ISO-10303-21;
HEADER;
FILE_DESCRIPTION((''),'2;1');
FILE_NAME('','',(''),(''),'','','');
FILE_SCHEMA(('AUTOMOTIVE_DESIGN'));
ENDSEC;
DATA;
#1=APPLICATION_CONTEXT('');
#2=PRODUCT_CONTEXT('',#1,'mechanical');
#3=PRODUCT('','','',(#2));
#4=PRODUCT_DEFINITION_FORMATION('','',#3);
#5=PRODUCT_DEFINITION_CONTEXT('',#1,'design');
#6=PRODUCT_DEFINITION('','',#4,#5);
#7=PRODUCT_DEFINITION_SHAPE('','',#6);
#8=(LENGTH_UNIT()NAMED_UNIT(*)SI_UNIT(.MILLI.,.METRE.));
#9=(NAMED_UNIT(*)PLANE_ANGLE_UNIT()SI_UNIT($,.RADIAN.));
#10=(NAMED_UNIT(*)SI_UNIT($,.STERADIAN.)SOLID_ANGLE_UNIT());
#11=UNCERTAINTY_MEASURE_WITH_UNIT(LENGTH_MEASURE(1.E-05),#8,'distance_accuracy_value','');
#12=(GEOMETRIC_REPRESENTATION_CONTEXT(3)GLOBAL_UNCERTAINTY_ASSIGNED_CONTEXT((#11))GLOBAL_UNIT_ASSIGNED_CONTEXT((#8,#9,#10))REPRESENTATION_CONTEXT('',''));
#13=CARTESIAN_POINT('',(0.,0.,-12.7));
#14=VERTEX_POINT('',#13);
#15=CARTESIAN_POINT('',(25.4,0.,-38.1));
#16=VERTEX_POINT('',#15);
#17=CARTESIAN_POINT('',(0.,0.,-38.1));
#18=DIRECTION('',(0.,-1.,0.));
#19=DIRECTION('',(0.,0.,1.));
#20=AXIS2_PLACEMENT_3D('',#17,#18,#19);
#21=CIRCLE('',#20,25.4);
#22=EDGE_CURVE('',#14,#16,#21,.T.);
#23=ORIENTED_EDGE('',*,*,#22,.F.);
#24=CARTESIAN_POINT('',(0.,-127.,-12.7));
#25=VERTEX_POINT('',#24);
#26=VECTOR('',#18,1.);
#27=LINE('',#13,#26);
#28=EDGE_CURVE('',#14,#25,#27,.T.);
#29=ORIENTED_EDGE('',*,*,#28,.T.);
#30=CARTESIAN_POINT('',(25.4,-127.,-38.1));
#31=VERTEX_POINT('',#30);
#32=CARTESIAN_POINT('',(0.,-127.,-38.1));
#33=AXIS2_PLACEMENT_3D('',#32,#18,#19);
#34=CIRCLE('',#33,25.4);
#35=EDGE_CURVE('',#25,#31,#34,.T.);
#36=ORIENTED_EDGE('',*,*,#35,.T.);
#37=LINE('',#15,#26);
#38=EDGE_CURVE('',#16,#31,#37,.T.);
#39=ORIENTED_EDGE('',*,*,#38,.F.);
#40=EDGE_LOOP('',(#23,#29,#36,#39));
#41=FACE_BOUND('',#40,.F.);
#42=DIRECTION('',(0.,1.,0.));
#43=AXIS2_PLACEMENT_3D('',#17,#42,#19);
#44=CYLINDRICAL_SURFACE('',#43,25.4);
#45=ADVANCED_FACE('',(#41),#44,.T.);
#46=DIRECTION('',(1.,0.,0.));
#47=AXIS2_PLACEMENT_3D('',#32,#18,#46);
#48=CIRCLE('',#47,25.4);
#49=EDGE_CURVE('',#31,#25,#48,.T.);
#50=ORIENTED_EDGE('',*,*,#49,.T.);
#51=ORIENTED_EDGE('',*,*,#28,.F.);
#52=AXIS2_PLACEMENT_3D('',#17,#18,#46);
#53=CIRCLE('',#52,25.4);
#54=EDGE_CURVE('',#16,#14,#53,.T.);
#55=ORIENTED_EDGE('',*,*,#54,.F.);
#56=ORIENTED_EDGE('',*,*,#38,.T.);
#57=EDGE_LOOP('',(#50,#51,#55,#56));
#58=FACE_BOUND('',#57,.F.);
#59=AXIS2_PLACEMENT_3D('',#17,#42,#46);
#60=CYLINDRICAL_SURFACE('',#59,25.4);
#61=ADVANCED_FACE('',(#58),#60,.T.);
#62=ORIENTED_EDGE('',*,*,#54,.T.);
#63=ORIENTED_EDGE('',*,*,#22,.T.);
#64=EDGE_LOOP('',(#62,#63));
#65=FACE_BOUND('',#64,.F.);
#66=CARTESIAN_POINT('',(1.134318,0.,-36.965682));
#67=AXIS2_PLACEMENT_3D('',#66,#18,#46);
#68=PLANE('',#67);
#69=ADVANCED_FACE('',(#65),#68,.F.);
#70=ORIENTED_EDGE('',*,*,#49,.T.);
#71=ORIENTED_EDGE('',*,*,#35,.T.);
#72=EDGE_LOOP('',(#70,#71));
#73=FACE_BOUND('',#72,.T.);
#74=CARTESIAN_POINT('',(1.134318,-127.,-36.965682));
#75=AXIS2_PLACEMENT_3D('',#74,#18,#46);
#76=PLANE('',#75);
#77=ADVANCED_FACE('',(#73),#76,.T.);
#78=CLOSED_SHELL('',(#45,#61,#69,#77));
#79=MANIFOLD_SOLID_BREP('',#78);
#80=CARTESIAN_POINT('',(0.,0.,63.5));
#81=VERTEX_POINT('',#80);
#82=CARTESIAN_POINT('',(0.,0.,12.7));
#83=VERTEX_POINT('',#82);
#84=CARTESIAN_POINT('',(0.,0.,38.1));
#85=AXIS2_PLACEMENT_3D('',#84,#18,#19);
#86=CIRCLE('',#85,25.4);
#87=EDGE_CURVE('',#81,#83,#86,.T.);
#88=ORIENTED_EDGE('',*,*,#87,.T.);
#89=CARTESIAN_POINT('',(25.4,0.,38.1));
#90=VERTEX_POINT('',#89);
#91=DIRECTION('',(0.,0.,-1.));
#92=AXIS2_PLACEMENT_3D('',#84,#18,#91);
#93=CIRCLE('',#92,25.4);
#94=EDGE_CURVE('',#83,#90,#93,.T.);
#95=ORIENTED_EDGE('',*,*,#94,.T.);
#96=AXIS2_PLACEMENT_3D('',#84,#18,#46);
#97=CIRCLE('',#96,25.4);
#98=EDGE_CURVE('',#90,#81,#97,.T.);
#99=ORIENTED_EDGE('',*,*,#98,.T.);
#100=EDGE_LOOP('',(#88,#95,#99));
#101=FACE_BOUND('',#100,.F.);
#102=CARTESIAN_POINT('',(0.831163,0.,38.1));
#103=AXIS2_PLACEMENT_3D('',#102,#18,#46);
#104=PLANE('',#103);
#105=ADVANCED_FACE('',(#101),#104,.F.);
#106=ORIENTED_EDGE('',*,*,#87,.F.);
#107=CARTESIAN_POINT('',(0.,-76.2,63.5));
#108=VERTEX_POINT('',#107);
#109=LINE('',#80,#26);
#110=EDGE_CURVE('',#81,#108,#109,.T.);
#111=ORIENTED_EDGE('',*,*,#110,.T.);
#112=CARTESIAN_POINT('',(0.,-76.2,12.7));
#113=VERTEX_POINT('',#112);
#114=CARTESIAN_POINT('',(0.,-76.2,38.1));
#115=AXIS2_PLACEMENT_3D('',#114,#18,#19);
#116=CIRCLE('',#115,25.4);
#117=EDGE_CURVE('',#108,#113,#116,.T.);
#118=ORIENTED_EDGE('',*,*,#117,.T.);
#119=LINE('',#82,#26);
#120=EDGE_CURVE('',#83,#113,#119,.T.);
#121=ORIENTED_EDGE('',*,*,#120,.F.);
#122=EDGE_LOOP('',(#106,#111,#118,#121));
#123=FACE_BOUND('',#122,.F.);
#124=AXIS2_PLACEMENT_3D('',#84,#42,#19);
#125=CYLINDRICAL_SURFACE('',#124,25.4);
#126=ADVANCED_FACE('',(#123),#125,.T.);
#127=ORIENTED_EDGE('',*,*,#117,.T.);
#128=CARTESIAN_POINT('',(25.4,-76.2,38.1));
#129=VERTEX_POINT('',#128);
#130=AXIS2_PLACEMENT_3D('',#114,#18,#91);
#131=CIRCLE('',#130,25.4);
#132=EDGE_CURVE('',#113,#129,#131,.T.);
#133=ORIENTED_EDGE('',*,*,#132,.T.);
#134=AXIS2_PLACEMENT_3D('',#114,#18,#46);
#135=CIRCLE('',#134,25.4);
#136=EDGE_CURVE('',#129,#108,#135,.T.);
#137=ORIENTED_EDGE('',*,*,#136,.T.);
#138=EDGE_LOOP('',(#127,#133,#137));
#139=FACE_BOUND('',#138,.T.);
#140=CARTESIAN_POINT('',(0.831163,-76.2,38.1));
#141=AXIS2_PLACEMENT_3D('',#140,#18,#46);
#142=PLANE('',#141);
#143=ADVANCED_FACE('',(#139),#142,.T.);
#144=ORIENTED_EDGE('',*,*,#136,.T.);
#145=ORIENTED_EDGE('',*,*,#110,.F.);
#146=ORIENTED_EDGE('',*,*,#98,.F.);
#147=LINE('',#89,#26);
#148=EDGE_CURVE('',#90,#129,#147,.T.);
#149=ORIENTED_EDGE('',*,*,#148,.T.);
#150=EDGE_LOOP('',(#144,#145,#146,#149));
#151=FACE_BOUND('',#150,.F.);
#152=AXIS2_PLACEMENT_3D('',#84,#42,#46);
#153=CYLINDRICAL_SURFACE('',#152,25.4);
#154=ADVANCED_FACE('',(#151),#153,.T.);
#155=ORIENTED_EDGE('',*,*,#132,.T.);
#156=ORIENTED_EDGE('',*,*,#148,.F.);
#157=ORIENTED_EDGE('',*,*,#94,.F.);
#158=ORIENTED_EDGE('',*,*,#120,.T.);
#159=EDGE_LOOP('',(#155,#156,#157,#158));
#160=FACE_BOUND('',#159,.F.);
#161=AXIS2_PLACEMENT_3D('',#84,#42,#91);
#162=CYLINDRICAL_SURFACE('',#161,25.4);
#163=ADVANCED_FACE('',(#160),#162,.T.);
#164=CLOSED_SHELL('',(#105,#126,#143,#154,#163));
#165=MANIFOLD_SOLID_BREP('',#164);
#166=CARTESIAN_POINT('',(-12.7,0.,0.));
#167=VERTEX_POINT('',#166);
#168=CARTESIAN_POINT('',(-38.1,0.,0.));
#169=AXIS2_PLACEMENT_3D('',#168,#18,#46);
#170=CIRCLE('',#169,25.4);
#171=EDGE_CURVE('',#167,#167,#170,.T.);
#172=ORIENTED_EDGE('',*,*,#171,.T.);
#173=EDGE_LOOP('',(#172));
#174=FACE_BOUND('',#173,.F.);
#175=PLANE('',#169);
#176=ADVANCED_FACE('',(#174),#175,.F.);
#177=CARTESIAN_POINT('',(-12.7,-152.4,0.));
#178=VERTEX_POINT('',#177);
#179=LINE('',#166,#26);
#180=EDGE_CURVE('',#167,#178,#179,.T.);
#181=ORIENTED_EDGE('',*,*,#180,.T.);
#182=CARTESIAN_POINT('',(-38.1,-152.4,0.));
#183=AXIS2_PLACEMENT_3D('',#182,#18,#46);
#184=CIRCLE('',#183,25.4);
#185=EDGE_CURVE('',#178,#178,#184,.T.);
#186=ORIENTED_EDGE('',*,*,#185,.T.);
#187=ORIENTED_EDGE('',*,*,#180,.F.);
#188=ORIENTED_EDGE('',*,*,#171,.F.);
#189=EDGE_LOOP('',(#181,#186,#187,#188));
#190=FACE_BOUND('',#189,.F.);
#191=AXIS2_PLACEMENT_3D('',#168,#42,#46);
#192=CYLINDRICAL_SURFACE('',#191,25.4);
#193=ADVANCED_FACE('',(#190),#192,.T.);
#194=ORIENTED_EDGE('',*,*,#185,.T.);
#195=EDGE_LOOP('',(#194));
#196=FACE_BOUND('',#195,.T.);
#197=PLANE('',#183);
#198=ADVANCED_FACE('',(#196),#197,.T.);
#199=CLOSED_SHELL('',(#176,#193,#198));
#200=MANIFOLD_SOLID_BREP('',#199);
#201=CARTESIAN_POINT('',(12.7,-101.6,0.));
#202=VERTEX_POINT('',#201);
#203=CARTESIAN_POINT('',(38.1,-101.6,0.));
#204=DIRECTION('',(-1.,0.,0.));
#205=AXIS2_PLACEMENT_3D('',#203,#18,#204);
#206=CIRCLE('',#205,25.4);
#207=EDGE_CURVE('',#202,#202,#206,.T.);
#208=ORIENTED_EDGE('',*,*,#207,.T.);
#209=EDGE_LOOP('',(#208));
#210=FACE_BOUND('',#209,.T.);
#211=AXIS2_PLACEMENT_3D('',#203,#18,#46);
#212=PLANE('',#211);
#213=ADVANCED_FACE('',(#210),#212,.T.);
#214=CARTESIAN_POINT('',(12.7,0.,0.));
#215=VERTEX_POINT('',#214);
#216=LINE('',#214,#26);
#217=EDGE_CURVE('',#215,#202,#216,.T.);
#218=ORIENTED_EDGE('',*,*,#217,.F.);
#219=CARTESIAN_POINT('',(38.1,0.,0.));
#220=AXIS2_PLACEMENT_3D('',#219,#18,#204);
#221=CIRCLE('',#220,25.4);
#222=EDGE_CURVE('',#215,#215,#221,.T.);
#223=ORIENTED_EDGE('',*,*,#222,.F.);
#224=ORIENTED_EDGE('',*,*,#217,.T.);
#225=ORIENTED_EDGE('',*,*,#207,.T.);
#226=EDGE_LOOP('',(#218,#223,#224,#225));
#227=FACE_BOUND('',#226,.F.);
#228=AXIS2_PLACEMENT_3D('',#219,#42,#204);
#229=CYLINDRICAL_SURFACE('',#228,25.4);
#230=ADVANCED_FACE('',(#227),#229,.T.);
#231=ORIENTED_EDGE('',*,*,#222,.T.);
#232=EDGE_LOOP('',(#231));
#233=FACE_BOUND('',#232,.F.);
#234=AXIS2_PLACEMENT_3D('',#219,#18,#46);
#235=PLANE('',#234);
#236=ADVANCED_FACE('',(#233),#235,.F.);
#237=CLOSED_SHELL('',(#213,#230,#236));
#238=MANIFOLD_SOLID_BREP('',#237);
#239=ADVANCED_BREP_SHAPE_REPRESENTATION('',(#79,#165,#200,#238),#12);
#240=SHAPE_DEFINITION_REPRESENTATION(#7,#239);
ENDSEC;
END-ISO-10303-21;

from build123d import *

# Parameters (mm, degrees)
F1_DEPTH = 76.2
F4_DEPTH = 127
F5_R     = 25.4
F6_DEPTH = 152.4
F7_DEPTH = 101.6


# Not quite as in the source:
# - the program builds the solid bodies; features that only make, move or delete a surface that nothing else refers to are left out


with BuildPart() as f1:
    # F0 (on Front) → F1 (new body)
    with BuildSketch(Plane.XZ):
        with BuildLine():
            ThreePointArc((25.4, 38.1), (17.9605122421, 56.0605122421), (0, 63.5))
            ThreePointArc((0, 63.5), (-25.4, 38.1), (0, 12.7))
            ThreePointArc((0, 12.7), (17.9605122421, 20.1394877579), (25.4, 38.1))
        make_face()
    extrude(amount=F1_DEPTH)


with BuildPart() as f4:
    # F3 (on Front) → F4 (new body)
    with BuildSketch(Plane.XZ):
        with BuildLine():
            ThreePointArc((0, -12.7), (-17.9605122421, -56.0605122421), (25.4, -38.1))
            ThreePointArc((25.4, -38.1), (17.9605122421, -20.1394877579), (0, -12.7))
        make_face()
    extrude(amount=F4_DEPTH)


with BuildPart() as f6:
    # F5 (on Front) → F6 (new body)
    with BuildSketch(Plane.XZ):
        with Locations((-38.1, 0)):
            Circle(F5_R)
    extrude(amount=F6_DEPTH)


with BuildPart() as f7:
    # F5 (on Front) → F7 (new body)
    with BuildSketch(Plane.XZ):
        with BuildLine():
            ThreePointArc((63.5, 0), (38.1, 25.4), (12.7, 0))
            ThreePointArc((12.7, 0), (38.1, -25.4), (63.5, 0))
        make_face()
    extrude(amount=F7_DEPTH)


solid = Compound([f1.part, f4.part, f6.part, f7.part])
